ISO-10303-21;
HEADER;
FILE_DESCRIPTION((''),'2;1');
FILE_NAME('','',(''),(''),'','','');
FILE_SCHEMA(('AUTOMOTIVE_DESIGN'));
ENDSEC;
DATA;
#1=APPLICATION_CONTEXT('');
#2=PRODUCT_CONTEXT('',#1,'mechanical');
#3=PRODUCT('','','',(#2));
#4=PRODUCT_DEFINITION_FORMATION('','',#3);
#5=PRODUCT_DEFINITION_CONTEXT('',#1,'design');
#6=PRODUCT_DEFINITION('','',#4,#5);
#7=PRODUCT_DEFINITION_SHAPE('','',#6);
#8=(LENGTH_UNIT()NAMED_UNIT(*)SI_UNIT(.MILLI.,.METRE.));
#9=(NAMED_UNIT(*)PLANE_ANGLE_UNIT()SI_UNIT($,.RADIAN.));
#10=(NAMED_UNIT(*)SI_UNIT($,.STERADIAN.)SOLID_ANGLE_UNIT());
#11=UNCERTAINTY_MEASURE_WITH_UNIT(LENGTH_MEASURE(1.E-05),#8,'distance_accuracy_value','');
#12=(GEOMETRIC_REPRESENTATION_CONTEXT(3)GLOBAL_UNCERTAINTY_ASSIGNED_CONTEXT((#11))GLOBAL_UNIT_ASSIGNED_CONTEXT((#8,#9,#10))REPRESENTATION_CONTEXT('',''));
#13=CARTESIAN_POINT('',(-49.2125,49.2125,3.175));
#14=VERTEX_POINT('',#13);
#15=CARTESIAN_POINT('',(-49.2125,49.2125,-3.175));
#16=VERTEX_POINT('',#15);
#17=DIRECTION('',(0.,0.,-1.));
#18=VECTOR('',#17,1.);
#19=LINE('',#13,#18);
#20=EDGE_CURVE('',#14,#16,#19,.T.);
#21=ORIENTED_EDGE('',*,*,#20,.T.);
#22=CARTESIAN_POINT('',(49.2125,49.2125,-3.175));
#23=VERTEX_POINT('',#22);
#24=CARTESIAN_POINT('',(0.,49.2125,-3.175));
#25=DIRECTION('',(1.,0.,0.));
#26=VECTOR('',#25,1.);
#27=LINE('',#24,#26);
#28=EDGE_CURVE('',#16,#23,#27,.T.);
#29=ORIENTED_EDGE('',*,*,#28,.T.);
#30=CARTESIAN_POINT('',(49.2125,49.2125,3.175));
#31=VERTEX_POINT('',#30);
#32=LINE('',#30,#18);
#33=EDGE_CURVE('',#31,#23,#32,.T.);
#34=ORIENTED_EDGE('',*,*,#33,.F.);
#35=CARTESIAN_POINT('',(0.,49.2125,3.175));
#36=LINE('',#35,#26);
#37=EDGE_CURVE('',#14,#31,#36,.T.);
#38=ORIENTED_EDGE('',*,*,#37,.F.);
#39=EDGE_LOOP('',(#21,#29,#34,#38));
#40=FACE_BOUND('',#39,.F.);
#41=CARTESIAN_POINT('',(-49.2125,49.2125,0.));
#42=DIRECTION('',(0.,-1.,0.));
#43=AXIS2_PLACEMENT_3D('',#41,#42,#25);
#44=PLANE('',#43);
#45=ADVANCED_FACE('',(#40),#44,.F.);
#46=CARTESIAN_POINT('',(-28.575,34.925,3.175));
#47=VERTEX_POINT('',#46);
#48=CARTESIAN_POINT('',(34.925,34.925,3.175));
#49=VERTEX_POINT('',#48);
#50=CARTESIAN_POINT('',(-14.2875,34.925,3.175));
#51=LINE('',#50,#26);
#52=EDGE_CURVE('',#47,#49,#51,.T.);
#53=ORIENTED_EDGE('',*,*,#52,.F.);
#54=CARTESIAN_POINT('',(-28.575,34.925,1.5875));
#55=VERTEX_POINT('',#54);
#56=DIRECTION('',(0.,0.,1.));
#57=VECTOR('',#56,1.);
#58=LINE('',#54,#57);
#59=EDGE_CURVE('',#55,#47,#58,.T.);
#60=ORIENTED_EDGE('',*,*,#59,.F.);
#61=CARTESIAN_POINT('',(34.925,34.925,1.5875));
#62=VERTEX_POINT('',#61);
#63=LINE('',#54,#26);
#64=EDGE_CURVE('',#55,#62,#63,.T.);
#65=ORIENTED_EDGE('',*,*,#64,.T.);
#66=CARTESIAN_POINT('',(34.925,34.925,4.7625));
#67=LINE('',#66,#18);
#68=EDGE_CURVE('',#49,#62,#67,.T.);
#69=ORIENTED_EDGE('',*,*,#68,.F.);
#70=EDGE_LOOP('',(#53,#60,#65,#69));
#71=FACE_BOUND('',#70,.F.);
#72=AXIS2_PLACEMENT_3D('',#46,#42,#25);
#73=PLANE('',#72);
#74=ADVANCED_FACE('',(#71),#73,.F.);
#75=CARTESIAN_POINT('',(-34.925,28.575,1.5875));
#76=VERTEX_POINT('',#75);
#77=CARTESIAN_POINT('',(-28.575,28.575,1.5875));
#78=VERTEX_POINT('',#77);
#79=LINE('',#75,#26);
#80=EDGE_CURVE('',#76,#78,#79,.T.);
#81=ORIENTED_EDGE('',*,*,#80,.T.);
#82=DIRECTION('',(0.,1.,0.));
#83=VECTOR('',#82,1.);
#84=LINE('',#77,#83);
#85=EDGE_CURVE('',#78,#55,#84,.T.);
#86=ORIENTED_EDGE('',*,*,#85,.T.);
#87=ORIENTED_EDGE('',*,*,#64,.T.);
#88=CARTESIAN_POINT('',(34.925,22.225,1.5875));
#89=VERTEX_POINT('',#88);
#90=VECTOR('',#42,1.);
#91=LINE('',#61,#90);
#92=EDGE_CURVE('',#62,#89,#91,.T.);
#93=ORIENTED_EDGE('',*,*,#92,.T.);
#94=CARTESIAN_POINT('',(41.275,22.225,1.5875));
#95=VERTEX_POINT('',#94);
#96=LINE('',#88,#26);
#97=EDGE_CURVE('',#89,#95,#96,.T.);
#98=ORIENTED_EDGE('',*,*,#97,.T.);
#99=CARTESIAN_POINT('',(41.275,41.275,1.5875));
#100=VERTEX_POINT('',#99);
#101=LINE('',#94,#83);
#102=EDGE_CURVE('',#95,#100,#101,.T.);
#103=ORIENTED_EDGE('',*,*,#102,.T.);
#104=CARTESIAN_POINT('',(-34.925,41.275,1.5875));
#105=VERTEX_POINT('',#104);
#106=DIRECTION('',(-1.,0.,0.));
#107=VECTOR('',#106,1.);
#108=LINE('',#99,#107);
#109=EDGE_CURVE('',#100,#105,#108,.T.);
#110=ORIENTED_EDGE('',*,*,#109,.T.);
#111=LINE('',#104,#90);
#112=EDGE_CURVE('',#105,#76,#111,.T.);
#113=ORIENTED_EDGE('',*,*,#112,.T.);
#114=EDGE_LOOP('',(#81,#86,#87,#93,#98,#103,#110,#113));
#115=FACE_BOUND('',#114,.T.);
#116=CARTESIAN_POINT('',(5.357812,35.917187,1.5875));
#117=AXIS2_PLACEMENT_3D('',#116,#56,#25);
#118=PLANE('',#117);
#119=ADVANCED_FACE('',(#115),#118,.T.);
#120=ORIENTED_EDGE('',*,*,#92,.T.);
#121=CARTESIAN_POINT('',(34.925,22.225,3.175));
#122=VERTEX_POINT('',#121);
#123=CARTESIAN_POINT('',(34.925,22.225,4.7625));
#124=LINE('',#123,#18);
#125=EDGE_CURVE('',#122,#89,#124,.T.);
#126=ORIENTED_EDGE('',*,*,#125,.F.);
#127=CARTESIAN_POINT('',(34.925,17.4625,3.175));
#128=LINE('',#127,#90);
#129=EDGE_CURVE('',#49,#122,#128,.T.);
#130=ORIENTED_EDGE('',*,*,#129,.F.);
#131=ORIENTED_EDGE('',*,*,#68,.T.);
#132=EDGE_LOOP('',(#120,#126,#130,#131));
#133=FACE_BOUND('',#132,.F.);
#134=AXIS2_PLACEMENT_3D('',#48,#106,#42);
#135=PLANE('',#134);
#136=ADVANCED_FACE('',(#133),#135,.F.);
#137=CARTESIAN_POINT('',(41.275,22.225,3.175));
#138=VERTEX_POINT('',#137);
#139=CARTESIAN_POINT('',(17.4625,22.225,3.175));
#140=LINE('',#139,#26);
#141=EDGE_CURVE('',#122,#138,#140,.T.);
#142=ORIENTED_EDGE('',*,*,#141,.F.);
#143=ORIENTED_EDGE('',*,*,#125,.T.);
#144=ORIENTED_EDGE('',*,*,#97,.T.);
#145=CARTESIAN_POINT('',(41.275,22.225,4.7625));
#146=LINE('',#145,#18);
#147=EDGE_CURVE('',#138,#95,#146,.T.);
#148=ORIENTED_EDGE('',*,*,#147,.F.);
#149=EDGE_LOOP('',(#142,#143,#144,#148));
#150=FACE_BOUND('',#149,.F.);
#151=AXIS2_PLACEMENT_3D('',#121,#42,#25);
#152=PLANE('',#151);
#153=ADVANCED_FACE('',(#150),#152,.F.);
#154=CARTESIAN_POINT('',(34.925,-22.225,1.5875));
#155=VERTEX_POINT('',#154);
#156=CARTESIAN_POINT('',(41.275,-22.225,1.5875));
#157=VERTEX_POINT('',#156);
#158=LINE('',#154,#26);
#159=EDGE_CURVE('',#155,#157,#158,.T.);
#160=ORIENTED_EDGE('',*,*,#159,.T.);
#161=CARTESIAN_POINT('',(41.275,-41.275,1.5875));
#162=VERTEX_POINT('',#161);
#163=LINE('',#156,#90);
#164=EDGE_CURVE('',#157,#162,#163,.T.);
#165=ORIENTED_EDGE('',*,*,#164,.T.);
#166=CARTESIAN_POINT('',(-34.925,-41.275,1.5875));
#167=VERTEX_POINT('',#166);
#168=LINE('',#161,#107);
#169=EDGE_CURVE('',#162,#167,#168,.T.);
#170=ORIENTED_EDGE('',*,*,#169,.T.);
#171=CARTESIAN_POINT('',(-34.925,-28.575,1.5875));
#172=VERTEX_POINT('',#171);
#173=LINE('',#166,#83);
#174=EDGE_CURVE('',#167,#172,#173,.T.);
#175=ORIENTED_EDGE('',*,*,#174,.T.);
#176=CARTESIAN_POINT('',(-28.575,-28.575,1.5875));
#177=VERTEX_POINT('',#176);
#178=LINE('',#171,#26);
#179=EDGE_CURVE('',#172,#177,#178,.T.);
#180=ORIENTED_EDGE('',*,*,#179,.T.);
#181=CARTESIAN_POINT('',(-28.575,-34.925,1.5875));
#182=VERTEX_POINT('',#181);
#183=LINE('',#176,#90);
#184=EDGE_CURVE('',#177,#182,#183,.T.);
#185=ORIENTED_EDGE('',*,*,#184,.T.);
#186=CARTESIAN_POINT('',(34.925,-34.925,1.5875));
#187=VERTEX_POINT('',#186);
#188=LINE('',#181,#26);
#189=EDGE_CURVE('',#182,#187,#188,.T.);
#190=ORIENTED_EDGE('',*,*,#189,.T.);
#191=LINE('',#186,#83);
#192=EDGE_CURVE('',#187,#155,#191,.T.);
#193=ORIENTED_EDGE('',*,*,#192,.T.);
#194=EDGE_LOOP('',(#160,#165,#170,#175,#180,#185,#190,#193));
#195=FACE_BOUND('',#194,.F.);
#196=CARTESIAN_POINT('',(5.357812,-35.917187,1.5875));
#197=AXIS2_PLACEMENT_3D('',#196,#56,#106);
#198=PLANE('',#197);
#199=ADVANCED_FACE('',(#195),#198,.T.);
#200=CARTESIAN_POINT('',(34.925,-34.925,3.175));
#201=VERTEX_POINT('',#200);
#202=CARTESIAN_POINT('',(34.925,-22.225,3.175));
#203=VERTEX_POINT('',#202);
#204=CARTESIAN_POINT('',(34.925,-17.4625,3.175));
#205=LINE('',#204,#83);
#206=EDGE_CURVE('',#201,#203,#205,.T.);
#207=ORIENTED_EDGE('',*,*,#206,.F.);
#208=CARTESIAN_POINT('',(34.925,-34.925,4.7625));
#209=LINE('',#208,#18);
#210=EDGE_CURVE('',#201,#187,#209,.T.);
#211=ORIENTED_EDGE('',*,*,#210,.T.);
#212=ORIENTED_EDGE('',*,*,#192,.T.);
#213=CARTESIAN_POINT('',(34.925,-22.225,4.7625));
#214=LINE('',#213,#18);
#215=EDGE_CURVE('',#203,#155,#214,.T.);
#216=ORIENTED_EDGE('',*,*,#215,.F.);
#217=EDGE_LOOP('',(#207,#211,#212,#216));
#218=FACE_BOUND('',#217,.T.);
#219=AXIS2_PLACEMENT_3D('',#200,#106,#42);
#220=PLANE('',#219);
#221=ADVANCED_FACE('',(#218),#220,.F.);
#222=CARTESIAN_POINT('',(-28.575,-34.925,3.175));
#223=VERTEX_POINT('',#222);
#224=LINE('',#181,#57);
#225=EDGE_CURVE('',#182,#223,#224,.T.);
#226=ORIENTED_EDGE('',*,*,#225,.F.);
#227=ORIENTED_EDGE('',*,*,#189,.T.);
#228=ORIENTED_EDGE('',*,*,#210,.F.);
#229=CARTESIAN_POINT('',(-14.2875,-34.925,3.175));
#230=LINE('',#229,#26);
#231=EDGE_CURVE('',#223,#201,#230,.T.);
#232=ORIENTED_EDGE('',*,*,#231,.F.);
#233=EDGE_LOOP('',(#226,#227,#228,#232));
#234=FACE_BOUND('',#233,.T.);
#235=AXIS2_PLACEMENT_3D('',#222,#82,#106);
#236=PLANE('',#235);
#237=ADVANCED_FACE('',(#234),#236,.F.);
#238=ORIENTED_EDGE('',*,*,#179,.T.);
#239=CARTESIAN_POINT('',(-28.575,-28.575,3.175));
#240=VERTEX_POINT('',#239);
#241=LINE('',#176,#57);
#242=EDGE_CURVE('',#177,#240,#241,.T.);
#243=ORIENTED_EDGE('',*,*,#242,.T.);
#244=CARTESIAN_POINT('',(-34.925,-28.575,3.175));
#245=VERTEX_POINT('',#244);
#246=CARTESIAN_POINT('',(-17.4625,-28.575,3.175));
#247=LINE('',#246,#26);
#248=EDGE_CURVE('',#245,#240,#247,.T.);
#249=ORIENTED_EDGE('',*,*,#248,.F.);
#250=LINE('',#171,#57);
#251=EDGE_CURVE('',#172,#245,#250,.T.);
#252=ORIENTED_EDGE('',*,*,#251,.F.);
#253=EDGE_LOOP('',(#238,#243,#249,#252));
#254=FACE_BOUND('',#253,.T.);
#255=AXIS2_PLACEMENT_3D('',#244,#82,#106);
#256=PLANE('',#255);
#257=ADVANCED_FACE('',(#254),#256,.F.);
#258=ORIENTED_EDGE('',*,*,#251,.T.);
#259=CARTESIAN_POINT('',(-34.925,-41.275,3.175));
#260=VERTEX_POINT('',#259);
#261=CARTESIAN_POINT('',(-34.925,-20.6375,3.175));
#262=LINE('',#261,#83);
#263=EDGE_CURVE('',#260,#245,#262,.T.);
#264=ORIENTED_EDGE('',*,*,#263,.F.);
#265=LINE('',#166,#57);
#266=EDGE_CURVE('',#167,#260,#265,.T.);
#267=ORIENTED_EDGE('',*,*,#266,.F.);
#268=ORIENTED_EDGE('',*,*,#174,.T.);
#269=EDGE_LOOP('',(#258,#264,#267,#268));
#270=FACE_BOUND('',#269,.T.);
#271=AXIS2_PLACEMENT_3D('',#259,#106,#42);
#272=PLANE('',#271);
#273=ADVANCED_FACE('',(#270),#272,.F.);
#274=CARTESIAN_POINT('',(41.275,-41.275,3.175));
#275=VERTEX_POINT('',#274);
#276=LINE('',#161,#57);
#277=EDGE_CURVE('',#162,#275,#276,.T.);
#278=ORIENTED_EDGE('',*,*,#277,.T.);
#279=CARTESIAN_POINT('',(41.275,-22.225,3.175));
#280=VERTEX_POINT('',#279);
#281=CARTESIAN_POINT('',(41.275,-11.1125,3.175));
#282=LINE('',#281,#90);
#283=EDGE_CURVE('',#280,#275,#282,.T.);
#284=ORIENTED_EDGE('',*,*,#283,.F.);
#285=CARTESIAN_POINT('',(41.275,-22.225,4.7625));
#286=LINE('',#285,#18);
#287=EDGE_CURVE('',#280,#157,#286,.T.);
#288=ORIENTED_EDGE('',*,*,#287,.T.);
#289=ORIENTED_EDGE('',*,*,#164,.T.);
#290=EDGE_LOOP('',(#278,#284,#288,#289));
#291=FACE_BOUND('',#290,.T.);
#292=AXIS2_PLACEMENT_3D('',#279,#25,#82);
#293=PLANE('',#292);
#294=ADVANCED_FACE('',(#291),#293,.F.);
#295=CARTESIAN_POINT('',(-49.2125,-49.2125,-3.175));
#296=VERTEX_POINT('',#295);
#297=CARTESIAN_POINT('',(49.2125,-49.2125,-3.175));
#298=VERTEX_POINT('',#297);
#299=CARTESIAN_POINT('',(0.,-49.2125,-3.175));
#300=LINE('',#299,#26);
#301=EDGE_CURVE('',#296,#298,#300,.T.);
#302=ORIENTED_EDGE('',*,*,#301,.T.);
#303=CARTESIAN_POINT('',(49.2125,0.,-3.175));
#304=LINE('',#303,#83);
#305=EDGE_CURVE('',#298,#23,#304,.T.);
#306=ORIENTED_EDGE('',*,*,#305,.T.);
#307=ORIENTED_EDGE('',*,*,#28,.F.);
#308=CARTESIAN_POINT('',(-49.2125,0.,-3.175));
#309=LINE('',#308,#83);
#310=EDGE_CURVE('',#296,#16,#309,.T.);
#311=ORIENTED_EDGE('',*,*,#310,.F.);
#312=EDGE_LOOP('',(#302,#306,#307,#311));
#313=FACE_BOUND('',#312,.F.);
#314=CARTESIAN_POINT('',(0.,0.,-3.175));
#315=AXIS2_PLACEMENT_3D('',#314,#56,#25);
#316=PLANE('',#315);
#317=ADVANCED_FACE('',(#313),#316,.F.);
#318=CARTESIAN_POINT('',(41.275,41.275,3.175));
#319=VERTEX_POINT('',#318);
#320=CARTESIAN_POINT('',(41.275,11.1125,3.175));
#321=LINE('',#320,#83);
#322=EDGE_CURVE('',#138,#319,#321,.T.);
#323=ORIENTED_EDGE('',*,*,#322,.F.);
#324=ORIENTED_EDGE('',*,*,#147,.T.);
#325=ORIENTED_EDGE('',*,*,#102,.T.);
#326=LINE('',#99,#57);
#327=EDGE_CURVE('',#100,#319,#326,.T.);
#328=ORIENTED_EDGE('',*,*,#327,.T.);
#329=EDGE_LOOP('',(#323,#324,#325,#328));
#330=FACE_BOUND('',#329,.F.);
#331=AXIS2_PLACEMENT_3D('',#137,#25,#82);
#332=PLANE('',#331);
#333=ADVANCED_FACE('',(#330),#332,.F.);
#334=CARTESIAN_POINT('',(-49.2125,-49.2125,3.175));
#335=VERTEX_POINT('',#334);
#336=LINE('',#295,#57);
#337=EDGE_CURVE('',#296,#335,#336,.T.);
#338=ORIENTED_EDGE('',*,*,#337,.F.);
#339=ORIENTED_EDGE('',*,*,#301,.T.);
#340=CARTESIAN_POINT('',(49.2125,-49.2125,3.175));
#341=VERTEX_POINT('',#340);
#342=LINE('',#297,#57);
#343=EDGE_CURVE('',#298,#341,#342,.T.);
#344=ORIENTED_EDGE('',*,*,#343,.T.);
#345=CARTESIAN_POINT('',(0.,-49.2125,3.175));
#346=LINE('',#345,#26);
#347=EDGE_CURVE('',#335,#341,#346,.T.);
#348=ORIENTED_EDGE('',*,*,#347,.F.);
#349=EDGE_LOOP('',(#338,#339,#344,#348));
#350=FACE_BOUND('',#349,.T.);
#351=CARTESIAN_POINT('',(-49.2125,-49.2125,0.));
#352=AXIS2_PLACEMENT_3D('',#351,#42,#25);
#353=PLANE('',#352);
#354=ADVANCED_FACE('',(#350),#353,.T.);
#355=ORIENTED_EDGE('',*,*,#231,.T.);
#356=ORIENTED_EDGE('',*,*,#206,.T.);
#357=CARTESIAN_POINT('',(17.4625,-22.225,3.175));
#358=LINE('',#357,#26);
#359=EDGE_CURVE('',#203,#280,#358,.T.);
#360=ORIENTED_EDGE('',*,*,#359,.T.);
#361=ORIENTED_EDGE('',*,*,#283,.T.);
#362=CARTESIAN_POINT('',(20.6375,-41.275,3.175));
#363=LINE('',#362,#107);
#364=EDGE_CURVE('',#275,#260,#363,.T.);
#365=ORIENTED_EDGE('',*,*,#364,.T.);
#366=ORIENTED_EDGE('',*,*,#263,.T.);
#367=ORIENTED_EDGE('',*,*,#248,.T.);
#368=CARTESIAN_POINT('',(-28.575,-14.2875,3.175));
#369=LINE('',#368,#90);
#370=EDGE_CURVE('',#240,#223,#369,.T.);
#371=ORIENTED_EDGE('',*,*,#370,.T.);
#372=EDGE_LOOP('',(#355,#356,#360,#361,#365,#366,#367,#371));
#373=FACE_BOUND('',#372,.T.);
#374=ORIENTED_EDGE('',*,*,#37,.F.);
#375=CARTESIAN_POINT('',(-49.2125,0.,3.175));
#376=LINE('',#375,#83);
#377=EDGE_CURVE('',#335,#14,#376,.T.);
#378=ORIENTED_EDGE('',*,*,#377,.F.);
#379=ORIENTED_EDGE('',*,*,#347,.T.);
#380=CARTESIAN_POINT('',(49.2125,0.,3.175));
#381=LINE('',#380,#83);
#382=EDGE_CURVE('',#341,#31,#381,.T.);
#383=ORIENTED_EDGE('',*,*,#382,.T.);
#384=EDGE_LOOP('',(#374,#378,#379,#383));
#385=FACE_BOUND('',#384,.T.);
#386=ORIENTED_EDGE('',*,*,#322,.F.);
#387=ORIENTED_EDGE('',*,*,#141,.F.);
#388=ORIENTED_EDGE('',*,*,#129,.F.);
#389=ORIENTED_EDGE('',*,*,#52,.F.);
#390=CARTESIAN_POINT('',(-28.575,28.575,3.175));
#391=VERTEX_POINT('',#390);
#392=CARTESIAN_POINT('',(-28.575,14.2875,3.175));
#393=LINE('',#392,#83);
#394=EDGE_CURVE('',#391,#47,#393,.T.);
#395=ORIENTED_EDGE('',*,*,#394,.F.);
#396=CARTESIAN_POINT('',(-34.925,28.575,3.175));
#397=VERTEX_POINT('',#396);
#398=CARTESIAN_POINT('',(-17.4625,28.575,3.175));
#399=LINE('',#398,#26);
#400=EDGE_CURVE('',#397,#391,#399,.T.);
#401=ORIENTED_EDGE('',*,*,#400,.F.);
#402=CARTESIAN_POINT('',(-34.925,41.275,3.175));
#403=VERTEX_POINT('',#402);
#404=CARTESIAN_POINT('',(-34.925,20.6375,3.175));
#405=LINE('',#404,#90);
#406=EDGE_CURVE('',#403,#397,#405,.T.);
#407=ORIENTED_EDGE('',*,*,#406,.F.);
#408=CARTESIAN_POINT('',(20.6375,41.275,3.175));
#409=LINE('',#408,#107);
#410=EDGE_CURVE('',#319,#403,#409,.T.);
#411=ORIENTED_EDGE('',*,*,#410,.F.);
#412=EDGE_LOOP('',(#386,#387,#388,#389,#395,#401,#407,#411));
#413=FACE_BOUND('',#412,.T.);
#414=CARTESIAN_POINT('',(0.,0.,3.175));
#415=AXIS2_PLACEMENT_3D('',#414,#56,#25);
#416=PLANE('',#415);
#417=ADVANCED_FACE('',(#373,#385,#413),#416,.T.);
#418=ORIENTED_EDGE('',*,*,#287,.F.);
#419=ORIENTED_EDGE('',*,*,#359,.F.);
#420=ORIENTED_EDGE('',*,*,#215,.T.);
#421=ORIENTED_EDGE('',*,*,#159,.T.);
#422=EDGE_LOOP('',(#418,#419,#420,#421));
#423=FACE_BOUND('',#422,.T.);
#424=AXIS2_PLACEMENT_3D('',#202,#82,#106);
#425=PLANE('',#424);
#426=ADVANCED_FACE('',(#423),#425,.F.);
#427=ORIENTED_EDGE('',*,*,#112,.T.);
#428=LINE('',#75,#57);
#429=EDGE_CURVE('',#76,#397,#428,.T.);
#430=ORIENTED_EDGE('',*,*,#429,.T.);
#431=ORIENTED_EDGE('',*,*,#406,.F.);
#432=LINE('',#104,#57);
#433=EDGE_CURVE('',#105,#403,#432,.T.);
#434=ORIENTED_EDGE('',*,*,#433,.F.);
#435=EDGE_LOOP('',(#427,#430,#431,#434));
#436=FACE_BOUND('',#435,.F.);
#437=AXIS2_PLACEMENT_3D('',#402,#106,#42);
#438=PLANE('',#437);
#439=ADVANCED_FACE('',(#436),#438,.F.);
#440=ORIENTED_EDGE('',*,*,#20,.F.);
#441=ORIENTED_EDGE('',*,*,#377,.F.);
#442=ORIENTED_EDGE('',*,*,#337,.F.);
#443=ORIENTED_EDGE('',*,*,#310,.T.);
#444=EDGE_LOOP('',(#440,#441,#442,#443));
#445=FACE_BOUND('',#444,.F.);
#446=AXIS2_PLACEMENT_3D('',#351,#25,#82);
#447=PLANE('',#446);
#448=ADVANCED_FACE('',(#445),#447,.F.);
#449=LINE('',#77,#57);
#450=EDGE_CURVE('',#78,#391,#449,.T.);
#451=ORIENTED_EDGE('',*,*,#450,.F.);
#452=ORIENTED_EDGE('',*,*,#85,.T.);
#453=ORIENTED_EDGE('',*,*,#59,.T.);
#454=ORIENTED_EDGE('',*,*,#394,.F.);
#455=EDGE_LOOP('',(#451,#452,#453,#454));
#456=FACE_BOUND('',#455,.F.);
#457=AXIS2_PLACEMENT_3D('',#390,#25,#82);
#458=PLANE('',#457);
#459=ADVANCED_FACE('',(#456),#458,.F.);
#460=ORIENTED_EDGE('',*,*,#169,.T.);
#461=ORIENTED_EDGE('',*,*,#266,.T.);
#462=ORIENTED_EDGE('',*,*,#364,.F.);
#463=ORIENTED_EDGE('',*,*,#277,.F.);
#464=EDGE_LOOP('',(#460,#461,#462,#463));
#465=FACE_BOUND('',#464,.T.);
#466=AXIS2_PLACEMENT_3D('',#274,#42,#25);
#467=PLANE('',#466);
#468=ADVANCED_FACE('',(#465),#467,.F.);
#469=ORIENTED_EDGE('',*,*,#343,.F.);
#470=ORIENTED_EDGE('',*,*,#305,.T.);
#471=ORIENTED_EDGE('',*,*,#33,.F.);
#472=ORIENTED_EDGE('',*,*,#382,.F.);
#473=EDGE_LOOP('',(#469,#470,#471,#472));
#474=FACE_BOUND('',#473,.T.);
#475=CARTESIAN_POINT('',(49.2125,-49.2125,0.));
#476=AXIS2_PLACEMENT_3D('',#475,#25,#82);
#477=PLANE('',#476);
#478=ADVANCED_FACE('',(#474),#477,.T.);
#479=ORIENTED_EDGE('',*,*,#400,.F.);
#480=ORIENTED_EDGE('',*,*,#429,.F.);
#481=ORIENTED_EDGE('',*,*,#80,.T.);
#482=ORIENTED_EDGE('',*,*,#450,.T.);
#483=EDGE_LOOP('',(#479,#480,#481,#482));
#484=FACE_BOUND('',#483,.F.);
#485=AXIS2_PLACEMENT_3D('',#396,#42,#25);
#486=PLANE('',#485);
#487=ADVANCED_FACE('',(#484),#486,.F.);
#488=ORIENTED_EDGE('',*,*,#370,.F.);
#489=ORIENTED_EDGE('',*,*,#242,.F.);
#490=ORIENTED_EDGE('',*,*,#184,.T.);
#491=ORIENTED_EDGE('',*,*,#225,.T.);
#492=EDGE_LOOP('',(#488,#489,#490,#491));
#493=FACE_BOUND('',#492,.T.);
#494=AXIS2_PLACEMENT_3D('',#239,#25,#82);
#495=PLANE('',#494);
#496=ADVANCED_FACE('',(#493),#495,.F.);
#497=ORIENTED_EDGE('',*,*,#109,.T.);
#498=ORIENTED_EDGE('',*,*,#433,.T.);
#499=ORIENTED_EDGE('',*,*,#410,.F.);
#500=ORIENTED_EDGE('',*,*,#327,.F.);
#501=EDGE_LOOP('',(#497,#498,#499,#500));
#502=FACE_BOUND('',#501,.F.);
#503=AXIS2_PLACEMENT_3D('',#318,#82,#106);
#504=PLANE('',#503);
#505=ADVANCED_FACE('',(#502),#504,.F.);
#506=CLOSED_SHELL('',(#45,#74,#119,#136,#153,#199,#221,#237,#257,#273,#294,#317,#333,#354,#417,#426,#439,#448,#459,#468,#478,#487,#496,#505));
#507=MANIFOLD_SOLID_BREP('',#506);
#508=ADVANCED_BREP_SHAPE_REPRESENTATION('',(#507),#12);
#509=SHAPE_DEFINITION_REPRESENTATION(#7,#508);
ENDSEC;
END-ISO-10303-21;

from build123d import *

# Parameters (mm, degrees)
F0_W     = 98.425
F0_H     = 98.425
F1_DEPTH = 3.175
F3_DEPTH = 1.5875


# Not quite as in the source:
# - a pattern or mirror of a feature is missing from the dataset's text; its kind, count and spacing are read off the source's solid


with BuildPart() as f1:
    # F0 (on Top) → F1 (new body, symmetric)
    with BuildSketch(Plane.XY):
        Rectangle(F0_W, F0_H)
    extrude(amount=F1_DEPTH, both=True)

    # F2 (on face) → F3 (cut, symmetric)
    with BuildSketch(Plane.XY.offset(3.175)):
        Polygon((41.275, 22.225), (41.275, 41.275), (-34.925, 41.275), (-34.925, 28.575), (-28.575, 28.575), (-28.575, 34.925), (34.925, 34.925), (34.925, 22.225), align=None)
    f3 = extrude(amount=F3_DEPTH, both=True, mode=Mode.SUBTRACT)

    # F3_copies: F3 across plane
    add(f3.mirror(Plane(origin=(0, 0, 0), x_dir=(0, 0, -1), z_dir=(0, -1, 0))), mode=Mode.SUBTRACT)


solid = f1.part
